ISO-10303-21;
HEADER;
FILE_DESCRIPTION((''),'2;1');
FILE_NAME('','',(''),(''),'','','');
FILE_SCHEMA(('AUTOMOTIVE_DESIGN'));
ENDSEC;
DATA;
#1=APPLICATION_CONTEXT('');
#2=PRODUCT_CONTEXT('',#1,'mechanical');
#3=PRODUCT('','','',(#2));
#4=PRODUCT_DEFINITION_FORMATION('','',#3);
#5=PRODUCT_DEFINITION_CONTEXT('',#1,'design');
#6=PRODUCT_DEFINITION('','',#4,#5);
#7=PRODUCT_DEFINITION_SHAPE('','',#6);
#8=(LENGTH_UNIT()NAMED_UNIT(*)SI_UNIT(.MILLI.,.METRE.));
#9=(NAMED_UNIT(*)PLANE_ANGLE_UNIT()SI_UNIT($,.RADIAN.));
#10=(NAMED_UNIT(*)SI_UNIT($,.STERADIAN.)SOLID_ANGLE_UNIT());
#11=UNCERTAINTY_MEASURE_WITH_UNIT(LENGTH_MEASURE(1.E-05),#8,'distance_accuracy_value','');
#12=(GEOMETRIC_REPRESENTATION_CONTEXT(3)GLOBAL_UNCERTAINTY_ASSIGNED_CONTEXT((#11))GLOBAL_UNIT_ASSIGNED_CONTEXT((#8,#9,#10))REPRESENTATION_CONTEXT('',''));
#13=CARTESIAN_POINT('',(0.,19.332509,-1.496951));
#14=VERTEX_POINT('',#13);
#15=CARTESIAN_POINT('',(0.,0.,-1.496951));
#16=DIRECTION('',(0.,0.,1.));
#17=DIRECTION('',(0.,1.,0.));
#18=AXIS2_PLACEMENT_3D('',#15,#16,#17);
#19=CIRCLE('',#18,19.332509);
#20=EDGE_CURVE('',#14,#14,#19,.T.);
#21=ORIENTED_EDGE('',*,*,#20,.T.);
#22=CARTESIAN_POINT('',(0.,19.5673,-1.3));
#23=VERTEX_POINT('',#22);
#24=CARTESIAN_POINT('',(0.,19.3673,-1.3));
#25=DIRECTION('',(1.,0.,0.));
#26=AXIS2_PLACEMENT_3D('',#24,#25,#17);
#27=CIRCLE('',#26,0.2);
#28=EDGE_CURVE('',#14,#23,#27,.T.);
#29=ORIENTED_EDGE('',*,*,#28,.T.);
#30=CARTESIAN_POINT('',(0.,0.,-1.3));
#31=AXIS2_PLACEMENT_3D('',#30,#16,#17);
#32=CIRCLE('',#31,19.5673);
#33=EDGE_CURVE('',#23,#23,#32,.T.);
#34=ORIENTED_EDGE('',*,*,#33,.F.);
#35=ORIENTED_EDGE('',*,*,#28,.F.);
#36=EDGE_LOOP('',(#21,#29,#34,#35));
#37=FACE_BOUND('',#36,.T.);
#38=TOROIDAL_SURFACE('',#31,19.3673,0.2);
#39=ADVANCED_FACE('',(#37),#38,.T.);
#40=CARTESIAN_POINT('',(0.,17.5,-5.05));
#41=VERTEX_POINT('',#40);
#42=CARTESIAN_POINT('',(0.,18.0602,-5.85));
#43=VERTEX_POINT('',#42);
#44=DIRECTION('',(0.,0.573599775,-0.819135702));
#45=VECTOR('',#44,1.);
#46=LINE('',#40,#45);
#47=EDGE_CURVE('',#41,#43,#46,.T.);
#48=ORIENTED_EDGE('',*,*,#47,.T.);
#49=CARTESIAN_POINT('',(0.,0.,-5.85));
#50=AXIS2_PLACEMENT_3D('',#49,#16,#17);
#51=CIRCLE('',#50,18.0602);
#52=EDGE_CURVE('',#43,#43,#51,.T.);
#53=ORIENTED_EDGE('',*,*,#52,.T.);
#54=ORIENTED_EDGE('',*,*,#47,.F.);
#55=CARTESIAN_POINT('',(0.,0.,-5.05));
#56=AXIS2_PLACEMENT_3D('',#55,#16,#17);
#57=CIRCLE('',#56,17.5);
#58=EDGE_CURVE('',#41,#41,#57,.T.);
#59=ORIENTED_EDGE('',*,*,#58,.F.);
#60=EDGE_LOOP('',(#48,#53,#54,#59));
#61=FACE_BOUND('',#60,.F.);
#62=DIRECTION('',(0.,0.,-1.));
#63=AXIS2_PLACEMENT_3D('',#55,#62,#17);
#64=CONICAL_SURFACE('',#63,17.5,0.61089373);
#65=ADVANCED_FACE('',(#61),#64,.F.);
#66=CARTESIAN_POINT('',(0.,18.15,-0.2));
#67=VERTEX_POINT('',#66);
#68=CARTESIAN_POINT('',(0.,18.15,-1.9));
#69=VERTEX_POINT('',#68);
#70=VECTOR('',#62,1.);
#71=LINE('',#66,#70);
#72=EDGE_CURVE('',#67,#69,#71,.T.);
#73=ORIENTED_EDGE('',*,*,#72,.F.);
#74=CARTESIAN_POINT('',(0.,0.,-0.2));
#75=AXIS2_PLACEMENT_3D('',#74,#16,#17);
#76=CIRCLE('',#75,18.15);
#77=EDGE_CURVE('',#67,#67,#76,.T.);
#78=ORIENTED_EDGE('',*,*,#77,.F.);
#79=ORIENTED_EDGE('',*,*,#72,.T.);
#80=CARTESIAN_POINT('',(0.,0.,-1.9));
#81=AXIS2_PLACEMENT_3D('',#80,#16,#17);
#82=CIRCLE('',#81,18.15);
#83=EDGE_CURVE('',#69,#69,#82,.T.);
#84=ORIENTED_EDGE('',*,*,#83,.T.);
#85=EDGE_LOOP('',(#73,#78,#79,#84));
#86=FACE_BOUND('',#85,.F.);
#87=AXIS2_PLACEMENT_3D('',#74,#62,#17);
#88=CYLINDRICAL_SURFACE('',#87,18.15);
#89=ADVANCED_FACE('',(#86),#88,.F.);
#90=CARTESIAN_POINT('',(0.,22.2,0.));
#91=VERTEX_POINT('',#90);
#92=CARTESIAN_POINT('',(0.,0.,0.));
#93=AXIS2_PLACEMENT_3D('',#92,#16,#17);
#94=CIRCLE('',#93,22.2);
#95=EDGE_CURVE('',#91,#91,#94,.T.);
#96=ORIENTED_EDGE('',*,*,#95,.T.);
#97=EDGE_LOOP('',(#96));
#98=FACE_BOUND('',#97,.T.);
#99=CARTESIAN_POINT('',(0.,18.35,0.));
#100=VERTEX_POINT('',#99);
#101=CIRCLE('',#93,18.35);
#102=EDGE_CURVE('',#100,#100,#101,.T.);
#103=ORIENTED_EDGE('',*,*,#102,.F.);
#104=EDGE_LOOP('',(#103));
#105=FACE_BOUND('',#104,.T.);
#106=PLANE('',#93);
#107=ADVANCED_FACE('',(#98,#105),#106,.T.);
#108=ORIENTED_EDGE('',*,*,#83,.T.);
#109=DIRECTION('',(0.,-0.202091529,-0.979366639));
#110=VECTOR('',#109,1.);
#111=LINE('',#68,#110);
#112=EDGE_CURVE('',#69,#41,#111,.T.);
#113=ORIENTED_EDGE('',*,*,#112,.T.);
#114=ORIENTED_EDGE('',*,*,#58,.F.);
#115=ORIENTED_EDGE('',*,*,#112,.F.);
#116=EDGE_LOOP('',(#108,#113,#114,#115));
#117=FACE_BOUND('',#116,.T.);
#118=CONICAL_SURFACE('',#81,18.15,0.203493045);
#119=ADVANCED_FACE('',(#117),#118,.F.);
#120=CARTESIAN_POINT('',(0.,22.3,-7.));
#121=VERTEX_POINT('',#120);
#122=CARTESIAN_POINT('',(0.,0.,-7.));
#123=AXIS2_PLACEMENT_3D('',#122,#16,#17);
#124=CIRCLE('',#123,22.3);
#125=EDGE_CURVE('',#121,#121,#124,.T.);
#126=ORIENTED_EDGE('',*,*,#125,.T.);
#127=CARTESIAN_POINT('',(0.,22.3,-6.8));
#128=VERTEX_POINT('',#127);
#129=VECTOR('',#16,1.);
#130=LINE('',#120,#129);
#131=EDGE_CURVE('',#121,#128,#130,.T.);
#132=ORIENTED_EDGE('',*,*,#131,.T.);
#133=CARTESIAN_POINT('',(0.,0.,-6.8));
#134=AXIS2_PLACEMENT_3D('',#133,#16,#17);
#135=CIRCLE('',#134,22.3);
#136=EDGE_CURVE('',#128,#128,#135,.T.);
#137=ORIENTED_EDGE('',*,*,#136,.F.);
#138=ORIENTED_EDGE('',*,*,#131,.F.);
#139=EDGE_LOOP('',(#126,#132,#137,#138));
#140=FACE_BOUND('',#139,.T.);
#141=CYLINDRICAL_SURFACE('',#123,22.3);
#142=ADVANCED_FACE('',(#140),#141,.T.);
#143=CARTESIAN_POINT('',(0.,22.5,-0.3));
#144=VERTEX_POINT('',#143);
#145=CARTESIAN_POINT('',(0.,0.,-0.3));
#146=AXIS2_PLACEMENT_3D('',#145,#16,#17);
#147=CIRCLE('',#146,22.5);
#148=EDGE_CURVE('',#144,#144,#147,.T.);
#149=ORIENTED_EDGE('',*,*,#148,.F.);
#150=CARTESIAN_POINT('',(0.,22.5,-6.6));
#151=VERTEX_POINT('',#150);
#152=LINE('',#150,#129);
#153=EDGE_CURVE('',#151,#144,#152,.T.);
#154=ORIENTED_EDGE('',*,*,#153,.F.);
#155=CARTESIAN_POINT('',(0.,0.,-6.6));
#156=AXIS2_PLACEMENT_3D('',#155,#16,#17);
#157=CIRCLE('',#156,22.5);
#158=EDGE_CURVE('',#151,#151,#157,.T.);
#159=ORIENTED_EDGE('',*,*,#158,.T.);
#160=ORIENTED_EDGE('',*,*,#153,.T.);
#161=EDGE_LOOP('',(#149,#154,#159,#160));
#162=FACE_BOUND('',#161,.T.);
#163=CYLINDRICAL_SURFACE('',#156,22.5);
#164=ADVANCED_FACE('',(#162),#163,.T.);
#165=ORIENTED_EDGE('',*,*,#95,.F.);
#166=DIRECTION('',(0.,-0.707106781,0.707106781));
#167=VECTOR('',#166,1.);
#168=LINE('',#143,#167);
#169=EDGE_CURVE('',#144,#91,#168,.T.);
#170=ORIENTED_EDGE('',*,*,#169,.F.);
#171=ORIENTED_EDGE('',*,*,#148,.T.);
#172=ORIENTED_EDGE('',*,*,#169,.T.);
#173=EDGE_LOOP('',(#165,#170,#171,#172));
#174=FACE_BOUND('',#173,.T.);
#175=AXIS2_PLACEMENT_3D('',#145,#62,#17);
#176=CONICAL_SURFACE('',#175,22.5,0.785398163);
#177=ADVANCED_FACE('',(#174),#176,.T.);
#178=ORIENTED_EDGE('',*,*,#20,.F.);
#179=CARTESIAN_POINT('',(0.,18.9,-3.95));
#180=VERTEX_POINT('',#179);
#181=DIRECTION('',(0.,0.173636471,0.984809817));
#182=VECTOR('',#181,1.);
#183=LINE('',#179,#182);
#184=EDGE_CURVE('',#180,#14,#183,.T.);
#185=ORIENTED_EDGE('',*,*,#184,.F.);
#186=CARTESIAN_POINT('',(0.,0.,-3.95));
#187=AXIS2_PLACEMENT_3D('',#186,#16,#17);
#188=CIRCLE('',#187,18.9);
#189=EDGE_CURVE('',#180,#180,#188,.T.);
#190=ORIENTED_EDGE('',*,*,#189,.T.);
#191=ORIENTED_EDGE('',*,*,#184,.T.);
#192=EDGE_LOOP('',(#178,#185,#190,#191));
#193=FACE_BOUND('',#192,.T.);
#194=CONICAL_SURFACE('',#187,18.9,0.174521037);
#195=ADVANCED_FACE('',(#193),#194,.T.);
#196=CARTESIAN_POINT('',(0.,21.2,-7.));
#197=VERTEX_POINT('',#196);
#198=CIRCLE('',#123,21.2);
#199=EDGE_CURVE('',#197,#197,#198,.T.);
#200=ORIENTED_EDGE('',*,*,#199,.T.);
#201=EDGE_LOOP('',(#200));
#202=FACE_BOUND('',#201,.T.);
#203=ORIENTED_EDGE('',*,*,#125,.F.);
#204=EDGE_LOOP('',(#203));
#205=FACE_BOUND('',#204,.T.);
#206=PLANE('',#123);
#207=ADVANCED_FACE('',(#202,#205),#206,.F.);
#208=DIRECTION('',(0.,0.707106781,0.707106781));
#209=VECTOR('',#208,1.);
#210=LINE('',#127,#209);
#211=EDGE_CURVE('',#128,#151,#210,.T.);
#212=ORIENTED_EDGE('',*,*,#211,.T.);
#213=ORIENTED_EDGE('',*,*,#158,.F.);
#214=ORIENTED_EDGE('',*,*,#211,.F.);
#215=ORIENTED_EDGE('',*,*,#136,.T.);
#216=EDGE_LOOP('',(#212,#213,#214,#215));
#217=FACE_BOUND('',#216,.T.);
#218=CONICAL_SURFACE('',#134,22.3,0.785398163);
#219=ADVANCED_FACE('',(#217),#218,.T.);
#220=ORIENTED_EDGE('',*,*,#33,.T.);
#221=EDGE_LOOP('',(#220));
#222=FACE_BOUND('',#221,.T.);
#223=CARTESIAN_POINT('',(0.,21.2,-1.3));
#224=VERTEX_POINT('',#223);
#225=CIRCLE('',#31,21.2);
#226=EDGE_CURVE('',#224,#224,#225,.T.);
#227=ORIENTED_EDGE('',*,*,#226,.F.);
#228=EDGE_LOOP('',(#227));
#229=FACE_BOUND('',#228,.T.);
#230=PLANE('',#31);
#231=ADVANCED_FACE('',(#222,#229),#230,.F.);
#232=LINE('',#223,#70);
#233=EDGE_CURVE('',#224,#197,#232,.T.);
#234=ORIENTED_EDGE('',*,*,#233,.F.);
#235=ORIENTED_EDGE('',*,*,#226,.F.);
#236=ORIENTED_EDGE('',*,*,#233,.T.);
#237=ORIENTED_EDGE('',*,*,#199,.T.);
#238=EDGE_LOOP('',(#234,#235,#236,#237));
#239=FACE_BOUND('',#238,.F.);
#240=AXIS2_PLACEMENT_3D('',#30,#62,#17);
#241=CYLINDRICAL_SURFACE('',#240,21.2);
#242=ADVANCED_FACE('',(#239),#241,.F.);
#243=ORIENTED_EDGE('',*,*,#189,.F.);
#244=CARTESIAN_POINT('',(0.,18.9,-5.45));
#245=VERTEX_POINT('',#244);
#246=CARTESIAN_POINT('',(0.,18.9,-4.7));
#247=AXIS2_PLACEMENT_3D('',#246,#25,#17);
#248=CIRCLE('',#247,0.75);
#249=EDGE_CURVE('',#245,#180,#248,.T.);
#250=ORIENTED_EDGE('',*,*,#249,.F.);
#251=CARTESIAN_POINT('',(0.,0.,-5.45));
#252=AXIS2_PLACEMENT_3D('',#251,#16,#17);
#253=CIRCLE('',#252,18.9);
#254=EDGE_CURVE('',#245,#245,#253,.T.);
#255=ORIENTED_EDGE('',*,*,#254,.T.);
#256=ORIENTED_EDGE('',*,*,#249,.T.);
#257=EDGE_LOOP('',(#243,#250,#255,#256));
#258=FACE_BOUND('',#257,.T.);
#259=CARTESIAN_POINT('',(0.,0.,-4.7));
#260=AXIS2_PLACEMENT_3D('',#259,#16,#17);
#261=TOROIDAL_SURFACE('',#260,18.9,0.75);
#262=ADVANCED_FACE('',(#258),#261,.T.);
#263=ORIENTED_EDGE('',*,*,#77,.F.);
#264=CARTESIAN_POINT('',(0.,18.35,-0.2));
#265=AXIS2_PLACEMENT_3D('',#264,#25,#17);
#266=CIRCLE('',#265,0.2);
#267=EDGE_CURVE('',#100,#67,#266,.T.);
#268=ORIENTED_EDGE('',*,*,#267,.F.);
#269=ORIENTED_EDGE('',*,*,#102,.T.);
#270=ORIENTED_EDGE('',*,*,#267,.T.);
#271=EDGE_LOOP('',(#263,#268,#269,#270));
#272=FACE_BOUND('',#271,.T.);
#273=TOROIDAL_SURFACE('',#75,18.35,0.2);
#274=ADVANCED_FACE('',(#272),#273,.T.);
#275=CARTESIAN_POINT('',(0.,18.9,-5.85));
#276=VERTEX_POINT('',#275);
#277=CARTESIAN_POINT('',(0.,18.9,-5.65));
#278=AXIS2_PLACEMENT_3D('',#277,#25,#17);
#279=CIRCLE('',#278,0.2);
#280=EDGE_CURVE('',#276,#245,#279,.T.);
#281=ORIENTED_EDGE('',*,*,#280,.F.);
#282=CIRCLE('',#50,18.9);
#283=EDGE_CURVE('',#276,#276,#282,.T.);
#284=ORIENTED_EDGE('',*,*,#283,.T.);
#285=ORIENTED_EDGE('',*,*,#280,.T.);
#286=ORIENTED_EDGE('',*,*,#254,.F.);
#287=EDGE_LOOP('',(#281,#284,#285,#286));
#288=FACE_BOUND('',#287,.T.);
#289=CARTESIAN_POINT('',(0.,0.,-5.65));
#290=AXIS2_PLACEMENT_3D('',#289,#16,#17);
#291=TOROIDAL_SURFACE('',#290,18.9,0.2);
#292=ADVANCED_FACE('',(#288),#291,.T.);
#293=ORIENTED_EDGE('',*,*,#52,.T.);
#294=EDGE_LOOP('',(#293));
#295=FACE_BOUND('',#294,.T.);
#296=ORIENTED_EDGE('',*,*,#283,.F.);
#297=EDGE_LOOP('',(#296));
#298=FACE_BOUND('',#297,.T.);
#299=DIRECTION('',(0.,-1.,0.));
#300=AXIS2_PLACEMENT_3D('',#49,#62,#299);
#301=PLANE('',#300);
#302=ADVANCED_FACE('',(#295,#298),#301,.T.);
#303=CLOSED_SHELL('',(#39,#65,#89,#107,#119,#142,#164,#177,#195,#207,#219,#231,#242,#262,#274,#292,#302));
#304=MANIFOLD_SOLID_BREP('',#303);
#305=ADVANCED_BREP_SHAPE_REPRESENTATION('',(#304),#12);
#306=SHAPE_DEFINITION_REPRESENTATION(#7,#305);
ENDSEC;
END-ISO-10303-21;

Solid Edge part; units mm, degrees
sketch "Sketch1" plane through (0, 0, 0) normal (1, 0, 0) x (0, 1, 0)
  line L0 (22.2, 0) -> (18.35, 0)
  arc A0 (18.35, 0) -> (18.15, -0.2) centre (18.35, -0.2) ccw
  line L1 (18.15, -0.2) -> (18.15, -1.9)
  line L2 (18.15, -1.9) -> (17.5, -5.05)
  line L3 (17.5, -5.05) -> (18.0602, -5.85)
  line L4 (18.0602, -5.85) -> (18.9, -5.85)
  arc A1 (18.9, -5.85) -> (18.9, -5.45) centre (18.9, -5.65) ccw
  arc A2 (18.9, -5.45) -> (18.9, -3.95) centre (18.9, -4.7) ccw
  line L5 (18.9, -3.95) -> (19.3325, -1.497)
  arc A3 (19.3325, -1.497) -> (19.5673, -1.3) centre (19.3673, -1.3) ccw
  line L6 (19.5673, -1.3) -> (21.2, -1.3)
  line L7 (21.2, -1.3) -> (21.2, -7)
  line L8 (21.2, -7) -> (22.3, -7)
  line L9 (22.3, -7) -> (22.3, -6.8)
  line L10 (22.3, -6.8) -> (22.5, -6.6)
  line L11 (22.5, -6.6) -> (22.5, -0.3)
  line L12 (22.5, -0.3) -> (22.2, 0)
revolve "RevolvedProtrusion1" add sketch "Sketch1" angle 360 about axis through (0, 0, -7) along (0, 0, 1)
properties part number "23915-11354507"
